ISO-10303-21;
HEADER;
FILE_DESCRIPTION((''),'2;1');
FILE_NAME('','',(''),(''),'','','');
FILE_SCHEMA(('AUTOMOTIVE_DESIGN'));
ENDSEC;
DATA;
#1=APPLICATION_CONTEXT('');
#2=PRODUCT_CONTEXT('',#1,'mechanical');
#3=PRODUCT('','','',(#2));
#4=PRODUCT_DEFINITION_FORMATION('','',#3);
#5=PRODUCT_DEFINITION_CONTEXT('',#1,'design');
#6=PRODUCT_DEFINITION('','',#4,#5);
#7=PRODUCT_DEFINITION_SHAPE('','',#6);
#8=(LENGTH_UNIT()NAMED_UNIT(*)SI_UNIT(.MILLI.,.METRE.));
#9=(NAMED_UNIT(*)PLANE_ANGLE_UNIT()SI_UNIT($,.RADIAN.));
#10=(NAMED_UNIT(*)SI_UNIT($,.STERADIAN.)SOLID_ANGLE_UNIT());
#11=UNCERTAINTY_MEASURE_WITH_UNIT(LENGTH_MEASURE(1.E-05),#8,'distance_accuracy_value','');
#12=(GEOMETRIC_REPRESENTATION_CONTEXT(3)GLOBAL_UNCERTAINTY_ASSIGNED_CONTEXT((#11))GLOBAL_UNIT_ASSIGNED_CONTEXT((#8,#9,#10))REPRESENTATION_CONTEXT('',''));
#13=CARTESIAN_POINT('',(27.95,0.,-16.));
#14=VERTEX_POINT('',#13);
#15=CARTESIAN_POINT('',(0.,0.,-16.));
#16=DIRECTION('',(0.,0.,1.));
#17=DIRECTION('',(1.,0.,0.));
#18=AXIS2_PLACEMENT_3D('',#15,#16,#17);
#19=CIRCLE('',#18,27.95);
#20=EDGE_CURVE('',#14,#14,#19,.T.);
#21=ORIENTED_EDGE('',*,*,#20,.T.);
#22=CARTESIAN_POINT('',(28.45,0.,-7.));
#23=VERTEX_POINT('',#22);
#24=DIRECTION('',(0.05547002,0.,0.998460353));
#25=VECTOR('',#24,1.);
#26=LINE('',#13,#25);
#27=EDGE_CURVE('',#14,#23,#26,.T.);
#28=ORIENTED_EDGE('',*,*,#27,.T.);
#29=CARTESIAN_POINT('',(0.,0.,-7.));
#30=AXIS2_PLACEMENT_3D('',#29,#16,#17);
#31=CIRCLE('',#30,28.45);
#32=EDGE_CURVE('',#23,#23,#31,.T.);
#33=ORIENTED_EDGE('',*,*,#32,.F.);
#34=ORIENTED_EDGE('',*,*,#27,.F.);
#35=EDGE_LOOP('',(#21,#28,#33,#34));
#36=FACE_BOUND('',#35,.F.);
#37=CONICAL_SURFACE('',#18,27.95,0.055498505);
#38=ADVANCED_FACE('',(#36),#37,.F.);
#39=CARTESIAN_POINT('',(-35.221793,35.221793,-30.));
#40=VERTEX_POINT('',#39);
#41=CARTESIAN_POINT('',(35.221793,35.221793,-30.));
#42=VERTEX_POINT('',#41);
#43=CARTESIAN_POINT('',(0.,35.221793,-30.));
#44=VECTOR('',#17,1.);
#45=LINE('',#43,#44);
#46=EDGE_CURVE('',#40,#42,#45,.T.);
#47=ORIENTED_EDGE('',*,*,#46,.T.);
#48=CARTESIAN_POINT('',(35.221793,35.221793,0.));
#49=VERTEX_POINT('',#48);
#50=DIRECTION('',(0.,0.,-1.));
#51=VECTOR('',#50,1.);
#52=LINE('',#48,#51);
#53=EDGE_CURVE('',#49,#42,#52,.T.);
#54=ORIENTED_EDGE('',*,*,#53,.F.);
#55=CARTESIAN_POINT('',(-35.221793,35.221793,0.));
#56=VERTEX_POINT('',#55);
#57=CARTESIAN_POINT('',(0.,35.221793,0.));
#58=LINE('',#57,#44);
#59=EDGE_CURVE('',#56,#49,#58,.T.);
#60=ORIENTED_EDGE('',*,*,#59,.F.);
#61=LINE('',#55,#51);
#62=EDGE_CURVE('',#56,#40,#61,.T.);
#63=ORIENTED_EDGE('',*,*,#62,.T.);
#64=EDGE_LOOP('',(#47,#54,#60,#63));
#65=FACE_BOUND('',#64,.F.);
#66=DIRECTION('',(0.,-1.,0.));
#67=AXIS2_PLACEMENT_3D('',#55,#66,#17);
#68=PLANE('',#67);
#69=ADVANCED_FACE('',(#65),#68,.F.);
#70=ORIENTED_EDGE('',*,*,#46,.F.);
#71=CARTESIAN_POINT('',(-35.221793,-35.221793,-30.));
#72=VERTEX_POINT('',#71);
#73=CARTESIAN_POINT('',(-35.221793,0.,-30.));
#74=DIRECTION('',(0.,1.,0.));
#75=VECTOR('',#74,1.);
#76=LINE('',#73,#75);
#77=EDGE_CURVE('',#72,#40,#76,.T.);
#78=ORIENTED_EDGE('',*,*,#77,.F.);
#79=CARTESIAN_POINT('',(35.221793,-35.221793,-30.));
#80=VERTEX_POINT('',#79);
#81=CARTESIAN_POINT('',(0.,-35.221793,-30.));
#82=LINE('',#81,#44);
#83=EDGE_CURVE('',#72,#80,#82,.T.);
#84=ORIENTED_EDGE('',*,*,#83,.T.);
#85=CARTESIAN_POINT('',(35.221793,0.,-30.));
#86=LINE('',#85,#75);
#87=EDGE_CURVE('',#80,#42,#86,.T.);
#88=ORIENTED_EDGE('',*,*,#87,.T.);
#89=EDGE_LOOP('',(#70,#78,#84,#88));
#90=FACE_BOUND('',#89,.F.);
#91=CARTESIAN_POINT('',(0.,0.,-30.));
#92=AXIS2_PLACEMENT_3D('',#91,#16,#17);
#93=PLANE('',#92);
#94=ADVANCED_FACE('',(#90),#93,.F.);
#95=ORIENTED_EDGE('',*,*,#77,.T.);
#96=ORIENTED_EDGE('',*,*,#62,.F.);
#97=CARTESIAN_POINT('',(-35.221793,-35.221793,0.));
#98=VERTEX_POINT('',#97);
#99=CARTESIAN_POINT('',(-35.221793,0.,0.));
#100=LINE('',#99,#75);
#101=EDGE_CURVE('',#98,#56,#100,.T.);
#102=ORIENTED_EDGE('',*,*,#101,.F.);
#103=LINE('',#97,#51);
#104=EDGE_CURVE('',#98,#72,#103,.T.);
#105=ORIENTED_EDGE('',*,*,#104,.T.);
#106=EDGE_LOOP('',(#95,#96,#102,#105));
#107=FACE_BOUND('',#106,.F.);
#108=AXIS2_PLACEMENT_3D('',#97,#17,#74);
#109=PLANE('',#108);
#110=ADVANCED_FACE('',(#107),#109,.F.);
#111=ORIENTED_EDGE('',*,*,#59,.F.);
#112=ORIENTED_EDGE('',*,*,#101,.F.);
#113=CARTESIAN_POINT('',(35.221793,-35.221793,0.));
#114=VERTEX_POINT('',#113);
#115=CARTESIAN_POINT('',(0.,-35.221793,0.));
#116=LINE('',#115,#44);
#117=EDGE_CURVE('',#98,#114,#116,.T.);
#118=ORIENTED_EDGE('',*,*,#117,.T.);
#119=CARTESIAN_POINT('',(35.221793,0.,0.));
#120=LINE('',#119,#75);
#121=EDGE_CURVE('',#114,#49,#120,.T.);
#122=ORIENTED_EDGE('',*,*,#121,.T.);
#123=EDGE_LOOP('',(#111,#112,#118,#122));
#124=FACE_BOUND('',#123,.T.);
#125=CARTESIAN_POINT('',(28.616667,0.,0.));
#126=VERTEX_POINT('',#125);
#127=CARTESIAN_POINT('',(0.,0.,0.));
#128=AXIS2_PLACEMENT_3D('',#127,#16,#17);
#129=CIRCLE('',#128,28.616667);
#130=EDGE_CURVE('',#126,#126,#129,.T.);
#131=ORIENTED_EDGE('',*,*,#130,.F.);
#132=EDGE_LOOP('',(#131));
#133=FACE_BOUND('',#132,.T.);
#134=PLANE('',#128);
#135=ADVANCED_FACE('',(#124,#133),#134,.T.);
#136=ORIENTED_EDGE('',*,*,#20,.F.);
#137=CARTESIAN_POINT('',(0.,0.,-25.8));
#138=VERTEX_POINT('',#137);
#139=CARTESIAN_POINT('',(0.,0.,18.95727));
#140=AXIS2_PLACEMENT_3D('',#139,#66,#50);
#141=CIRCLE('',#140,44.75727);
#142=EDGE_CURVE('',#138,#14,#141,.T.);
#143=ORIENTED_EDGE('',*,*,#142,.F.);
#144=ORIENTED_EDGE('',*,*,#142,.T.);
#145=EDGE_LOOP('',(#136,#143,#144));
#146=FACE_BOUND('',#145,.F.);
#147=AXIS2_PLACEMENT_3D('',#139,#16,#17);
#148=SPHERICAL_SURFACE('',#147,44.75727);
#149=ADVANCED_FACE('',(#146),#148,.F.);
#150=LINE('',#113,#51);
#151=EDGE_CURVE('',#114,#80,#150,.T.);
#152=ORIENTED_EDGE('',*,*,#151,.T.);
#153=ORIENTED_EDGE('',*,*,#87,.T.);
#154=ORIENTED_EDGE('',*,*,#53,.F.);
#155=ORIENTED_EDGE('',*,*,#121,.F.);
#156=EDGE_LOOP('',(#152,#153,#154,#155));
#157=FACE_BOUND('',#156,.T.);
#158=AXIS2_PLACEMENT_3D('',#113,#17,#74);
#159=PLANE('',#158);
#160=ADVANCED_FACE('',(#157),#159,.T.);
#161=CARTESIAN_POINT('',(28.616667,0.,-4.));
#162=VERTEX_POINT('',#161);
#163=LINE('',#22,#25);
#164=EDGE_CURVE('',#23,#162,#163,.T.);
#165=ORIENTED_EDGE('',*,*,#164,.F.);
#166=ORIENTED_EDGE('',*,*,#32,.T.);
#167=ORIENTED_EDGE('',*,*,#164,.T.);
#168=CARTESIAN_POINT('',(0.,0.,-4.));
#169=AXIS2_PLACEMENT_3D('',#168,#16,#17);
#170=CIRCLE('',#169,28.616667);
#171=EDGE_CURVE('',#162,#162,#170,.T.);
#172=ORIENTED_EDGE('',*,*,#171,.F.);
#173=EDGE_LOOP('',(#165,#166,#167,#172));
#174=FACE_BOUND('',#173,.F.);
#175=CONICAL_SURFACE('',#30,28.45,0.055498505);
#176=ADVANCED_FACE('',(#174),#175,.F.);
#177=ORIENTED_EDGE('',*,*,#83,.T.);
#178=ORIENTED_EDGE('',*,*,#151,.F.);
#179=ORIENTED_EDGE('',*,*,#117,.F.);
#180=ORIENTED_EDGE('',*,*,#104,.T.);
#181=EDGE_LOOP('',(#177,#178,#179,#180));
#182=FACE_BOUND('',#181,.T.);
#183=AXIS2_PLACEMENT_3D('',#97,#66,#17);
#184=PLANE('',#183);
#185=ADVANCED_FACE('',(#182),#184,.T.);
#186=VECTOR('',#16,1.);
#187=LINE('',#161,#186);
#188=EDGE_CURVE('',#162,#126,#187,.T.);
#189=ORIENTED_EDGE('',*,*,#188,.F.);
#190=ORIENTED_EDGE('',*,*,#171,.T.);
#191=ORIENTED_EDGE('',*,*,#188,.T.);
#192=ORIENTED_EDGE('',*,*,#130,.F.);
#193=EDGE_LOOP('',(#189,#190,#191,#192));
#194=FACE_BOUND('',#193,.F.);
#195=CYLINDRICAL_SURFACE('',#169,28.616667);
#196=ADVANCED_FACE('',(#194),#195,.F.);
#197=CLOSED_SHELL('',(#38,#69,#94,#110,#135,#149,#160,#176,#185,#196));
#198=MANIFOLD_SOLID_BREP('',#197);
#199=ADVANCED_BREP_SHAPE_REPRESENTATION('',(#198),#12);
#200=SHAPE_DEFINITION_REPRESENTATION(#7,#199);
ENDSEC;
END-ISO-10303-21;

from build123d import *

# Parameters (mm, degrees)
F0_W     = 70.443585515
F0_H     = 70.443585515
F1_DEPTH = 30


# Not quite as in the source:
# - a feature names something its author has since deleted; it is built from what else it names


with BuildPart() as f1:
    # F0 (on Top) → F1 (new body)
    with BuildSketch(Plane.XY):
        Rectangle(F0_W, F0_H)
    extrude(amount=-F1_DEPTH)

    # F2 (on Front) → F3 (revolve, cut)
    with BuildSketch(Plane.XZ):
        with BuildLine():
            Line((0, -7), (0, -16))
            Line((0, -16), (0, -25.8))
            ThreePointArc((0, -25.8), (14.8091399143, -23.279001082), (27.95, -16))
            Line((27.95, -16), (28.45, -7))
            Line((28.45, -7), (28.6166666667, -4))
            Line((28.6166666667, -4), (28.6166666667, 0))
            Line((28.6166666667, 0), (0, 0))
            Line((0, 0), (0, -4))
            Line((0, -4), (0, -7))
        make_face()
    revolve(axis=Axis((0, 0, -11.5), (0, 0, 1)), mode=Mode.SUBTRACT)


solid = f1.part
